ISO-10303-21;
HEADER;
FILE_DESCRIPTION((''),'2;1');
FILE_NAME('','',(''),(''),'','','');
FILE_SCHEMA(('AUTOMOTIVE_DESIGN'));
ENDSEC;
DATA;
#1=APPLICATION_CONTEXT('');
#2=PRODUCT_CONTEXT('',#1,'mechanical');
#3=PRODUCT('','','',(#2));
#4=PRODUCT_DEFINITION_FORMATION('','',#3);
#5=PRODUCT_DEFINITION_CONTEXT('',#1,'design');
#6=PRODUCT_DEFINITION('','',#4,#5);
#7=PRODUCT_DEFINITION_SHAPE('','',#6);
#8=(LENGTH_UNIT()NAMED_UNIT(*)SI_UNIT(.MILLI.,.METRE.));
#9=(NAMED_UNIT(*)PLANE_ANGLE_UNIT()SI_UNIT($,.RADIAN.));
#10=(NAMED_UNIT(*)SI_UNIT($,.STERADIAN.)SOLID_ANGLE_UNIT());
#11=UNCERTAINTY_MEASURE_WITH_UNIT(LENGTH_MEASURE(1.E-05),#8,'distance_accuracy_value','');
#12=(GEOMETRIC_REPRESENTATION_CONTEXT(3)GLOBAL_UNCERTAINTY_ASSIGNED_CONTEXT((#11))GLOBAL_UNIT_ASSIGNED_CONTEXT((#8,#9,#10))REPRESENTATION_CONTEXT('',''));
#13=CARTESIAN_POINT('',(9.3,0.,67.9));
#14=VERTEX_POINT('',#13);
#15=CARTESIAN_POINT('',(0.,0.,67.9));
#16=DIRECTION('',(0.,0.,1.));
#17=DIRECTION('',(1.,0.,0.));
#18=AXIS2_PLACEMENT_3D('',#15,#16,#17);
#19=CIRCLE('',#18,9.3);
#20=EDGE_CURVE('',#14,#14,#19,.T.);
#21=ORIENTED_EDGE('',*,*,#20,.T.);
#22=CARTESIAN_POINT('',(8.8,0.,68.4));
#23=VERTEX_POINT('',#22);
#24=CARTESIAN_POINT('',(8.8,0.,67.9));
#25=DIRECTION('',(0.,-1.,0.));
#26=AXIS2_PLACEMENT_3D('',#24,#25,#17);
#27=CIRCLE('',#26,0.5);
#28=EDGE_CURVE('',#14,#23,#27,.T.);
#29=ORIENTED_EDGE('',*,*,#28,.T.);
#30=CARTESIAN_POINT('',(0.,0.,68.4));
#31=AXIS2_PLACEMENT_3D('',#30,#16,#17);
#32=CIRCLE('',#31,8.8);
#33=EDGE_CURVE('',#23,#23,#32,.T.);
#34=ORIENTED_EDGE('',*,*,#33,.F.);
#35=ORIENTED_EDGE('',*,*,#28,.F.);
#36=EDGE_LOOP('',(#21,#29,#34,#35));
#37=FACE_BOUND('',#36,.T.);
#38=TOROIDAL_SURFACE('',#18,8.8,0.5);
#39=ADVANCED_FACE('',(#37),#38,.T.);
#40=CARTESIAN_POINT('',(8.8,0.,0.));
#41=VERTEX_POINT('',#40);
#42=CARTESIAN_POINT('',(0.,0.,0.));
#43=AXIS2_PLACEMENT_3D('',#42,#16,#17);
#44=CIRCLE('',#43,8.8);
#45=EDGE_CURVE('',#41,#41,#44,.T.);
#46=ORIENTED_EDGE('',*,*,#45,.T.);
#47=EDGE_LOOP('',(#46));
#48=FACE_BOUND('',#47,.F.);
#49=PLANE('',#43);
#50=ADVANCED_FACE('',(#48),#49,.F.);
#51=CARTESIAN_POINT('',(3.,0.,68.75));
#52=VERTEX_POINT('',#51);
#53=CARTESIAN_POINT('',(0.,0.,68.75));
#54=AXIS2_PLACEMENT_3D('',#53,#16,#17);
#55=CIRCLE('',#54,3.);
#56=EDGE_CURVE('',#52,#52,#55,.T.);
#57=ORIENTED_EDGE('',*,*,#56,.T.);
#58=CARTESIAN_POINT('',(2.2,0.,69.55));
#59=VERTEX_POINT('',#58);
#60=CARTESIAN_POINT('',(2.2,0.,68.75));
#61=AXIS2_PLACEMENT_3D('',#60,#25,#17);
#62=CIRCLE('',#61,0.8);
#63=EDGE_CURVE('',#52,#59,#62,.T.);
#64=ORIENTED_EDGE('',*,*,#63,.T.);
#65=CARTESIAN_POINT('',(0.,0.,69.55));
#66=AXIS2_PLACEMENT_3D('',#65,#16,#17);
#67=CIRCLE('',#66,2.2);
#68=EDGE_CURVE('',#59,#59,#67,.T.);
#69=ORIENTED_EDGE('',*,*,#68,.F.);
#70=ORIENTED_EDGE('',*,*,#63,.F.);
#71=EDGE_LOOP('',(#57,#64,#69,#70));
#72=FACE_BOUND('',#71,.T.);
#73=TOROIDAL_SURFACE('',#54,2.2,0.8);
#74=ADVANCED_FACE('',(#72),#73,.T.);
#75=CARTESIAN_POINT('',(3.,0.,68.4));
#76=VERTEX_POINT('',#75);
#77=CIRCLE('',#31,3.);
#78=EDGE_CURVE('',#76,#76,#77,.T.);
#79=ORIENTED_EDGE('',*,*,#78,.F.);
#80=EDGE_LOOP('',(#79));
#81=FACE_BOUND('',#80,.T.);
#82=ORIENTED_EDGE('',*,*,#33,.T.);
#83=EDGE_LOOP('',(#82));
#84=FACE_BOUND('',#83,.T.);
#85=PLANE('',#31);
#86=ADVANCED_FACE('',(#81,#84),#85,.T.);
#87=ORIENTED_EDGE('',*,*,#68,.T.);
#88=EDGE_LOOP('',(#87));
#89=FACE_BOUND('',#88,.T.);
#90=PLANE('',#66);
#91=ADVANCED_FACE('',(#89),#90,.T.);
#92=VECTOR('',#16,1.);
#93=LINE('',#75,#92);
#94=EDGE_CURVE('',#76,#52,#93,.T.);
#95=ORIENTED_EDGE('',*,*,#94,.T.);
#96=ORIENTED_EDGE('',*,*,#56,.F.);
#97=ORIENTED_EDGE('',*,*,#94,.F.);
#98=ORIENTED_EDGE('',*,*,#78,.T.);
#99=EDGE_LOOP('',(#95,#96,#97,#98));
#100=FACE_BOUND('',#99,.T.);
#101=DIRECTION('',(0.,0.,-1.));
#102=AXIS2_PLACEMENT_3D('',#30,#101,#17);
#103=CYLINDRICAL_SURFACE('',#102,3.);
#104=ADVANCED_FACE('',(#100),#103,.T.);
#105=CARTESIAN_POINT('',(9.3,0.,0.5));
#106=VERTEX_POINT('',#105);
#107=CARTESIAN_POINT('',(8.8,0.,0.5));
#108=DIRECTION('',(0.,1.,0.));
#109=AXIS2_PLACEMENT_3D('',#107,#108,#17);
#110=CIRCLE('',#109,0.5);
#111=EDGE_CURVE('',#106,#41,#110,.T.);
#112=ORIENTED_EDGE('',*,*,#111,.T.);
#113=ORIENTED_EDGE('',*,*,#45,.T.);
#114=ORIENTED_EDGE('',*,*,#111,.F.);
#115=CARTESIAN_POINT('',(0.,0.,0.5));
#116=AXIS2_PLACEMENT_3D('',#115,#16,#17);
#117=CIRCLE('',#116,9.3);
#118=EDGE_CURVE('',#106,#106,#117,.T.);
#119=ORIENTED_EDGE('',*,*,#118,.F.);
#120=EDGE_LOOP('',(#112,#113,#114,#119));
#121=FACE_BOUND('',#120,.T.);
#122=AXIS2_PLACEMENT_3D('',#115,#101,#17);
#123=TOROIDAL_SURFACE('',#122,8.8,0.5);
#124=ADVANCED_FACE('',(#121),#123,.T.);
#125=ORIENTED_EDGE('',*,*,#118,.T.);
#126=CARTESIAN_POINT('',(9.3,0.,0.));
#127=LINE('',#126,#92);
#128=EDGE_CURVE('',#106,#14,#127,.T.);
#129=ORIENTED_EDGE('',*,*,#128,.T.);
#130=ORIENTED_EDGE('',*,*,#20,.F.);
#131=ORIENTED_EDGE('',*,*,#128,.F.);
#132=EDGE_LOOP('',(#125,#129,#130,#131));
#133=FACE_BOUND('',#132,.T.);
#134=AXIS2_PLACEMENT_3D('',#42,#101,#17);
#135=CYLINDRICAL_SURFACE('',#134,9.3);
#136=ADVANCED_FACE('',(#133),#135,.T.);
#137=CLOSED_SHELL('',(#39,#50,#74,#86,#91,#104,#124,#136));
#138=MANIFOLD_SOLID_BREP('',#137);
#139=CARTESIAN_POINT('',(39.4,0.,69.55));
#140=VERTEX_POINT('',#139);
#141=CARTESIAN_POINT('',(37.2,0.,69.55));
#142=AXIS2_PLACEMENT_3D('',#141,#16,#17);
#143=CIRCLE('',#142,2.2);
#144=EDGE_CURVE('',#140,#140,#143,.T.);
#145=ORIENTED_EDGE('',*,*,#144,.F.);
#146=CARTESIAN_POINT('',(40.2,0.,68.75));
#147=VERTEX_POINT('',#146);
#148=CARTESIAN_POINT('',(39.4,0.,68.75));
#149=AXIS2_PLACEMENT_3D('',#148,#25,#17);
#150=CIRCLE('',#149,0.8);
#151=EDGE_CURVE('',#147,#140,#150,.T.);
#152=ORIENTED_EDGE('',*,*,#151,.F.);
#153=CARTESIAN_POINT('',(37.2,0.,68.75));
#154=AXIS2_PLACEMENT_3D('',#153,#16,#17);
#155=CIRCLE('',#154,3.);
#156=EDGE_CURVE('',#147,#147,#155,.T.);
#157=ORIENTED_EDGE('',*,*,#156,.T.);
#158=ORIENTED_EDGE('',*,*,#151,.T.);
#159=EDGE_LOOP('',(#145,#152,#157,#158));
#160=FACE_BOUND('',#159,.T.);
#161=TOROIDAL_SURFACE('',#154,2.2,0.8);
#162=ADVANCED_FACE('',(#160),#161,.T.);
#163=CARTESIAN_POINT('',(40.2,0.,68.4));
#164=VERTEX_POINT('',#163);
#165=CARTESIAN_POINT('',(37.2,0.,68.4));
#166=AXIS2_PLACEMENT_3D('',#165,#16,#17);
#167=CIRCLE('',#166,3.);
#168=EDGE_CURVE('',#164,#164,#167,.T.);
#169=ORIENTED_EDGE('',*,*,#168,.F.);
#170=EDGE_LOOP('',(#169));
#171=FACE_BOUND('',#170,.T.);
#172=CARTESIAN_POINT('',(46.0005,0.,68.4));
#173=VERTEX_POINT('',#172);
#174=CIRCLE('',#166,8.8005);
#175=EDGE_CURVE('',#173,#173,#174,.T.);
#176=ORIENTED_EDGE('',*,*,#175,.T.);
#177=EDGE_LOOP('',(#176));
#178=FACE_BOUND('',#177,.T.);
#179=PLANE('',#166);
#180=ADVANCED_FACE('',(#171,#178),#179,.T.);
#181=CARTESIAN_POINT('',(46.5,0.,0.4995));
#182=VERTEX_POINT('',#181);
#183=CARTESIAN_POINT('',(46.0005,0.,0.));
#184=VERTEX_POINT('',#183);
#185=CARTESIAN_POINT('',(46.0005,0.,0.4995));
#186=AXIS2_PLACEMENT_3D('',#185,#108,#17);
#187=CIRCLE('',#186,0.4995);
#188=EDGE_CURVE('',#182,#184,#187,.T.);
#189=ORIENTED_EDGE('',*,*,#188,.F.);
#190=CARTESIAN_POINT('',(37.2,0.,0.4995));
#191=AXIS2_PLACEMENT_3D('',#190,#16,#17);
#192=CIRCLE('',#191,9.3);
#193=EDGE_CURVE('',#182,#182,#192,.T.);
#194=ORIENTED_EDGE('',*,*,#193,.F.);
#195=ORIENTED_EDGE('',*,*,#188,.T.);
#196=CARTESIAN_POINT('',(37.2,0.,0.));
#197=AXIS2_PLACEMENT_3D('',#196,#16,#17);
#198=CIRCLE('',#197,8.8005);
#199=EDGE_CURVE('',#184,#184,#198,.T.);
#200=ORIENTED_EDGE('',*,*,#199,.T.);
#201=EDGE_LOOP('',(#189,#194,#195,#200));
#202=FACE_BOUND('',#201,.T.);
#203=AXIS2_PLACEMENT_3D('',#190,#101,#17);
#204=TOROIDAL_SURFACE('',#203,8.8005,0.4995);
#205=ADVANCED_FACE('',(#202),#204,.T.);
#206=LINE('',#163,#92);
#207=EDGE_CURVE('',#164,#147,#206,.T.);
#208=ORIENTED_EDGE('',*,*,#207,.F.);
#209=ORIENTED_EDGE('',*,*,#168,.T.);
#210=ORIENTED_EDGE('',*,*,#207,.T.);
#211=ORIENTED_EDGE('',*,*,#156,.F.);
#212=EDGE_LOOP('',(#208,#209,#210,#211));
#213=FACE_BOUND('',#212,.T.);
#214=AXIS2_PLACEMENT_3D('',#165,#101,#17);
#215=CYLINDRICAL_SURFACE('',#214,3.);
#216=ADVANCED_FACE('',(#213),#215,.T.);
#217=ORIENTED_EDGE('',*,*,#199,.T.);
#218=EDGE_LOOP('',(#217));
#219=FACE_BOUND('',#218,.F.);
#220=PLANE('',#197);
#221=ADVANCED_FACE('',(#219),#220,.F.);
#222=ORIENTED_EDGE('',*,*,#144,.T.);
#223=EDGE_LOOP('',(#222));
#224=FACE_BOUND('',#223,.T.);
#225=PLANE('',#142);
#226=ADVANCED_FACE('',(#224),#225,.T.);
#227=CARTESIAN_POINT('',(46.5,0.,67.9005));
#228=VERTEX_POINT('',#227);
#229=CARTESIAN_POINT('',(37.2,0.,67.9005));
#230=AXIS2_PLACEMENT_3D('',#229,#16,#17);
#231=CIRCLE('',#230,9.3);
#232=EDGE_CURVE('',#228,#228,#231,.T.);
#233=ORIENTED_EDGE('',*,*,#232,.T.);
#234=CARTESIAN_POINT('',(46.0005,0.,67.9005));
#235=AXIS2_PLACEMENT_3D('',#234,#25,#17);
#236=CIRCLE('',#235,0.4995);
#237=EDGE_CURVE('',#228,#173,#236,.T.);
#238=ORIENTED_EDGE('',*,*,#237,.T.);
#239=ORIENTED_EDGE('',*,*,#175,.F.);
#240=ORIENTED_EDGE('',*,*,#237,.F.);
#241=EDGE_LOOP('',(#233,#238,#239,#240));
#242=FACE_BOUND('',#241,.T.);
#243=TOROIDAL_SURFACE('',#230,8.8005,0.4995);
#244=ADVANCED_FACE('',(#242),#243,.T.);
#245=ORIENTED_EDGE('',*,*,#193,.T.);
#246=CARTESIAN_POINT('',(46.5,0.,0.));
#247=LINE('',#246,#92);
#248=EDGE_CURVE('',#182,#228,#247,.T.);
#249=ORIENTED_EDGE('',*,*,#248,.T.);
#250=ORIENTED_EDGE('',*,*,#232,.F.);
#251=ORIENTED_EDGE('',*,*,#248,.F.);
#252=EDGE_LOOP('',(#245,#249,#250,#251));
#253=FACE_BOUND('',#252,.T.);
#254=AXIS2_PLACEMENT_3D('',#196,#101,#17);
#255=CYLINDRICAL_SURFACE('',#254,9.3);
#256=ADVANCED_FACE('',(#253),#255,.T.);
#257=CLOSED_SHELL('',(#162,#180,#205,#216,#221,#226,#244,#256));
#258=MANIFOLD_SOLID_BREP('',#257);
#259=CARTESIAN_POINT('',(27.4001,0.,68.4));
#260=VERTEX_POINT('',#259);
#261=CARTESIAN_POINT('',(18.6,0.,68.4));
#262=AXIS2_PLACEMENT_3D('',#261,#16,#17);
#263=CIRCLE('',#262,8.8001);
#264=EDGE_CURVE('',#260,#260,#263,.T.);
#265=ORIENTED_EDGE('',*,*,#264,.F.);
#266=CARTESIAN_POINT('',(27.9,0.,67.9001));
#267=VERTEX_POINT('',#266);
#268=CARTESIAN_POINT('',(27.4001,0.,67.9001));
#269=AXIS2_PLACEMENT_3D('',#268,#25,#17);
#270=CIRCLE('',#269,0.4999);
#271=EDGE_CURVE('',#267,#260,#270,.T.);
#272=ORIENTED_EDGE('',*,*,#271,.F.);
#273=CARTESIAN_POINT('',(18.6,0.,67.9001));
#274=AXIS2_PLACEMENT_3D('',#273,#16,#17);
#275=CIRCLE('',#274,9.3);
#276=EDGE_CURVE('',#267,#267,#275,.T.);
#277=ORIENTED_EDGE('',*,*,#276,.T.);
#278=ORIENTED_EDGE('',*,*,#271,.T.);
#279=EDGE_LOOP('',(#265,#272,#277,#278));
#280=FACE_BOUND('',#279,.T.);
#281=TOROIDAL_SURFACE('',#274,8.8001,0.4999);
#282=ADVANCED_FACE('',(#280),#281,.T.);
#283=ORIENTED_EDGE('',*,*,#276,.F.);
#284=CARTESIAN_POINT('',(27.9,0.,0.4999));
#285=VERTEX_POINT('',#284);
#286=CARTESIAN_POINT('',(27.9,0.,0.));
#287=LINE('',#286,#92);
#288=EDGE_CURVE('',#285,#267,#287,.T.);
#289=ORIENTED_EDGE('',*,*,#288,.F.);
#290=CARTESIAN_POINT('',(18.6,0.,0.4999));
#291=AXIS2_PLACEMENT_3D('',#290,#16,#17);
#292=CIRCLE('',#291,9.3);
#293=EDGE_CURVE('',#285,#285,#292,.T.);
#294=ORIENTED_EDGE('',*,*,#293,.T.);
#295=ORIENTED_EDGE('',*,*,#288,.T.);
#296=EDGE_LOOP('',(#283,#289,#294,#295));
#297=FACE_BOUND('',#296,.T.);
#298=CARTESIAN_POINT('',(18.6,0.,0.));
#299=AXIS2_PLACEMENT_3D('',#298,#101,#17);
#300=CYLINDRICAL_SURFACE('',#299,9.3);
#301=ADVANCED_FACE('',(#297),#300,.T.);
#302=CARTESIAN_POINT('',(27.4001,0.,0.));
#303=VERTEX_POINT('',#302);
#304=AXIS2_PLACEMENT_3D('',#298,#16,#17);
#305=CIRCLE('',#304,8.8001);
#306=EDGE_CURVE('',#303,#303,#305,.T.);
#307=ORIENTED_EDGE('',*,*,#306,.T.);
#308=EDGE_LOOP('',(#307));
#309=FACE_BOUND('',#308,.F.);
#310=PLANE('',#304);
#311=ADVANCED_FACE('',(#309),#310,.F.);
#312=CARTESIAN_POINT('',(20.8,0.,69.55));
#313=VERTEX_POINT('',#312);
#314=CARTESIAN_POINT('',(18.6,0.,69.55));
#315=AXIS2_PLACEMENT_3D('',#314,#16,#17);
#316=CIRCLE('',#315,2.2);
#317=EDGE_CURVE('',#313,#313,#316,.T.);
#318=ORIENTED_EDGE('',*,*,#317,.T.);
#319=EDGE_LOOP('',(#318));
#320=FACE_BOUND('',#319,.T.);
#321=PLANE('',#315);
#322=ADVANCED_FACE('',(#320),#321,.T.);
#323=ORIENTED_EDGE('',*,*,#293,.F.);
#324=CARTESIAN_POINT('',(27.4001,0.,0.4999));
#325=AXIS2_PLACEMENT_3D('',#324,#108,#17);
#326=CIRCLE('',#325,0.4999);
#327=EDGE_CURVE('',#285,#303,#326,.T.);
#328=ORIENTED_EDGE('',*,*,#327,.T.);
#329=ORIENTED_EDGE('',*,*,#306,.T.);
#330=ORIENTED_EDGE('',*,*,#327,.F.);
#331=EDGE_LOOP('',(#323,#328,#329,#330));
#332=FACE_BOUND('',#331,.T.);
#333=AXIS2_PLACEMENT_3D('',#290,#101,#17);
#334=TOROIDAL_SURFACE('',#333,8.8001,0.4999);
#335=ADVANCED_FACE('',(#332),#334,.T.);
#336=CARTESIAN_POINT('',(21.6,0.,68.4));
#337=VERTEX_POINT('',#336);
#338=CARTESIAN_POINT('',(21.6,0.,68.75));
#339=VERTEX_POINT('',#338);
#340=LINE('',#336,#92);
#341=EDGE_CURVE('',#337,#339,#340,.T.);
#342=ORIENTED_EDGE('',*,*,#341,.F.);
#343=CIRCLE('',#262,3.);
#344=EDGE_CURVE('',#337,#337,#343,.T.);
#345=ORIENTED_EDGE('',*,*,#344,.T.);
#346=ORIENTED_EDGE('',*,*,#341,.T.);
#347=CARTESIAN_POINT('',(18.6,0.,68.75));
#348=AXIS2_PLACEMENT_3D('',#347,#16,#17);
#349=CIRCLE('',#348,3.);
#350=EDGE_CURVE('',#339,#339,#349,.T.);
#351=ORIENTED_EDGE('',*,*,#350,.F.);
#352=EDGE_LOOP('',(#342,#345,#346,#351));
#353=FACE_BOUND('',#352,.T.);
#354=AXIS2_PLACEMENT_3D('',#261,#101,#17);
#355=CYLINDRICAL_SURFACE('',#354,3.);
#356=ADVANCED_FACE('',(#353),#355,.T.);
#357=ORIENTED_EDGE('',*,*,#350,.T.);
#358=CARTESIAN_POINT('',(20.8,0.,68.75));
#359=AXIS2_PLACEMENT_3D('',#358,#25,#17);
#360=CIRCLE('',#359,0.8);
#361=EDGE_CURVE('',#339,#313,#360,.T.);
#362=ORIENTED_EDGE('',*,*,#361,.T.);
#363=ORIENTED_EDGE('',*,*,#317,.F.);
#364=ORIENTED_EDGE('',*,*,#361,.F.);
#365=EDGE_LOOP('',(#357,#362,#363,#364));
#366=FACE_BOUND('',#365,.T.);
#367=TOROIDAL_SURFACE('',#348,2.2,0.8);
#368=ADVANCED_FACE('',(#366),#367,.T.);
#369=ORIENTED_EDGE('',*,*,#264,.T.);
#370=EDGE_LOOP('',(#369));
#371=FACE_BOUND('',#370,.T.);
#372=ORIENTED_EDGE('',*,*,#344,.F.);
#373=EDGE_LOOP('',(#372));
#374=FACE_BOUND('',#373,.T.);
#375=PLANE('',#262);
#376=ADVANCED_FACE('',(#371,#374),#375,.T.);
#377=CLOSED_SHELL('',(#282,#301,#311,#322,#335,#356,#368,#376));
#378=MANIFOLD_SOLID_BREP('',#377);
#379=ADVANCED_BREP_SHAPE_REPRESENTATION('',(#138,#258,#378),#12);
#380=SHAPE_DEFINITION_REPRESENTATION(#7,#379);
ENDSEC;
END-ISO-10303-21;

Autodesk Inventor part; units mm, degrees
ref_plane "YZ Plane" through (0, 0, 0) normal (1, 0, 0) x (0, 1, 0)
ref_plane "XZ Plane" through (0, 0, 0) normal (0, 1, 0) x (-1, 0, 0)
ref_plane "XY Plane" through (0, 0, 0) normal (0, 0, 1) x (1, 0, 0)
sketch "스케치1" plane through (0, 0, 0) normal (0, 0, 1) x (1, 0, 0)
  circle A0 centre (0, 0) radius 9.3
  dimension "d0" = 18.6
extrude "돌출1" add sketch "스케치1" along normal blind 68.4
fillet "모깎기1" radius 0.5 2 edges at (-9.3, 0, 68.4) (-9.3, 0, 0)
sketch "스케치4" plane through (0, 0, 68.4) normal (0, 0, 1) x (1, 0, 0)
  circle A0 centre (0, 0) radius 3
  dimension "d11" = 6
extrude "돌출3" add sketch "스케치4" along normal blind 1.15
fillet "모깎기3" radius 0.8 1 edges at (-3, 0, 69.55)
pattern_linear "직사각형 패턴2" count 3 spacing 18.6 along (1, 0, 0) of "돌출1", "모깎기3", "돌출3", "모깎기1"
sketch "스케치5" plane through (0, 0, 68.4) normal (0, 0, 1) x (1, 0, 0)
  line L0 (0, 0) -> (7.6337, 0)
properties part number "18650배터리"
